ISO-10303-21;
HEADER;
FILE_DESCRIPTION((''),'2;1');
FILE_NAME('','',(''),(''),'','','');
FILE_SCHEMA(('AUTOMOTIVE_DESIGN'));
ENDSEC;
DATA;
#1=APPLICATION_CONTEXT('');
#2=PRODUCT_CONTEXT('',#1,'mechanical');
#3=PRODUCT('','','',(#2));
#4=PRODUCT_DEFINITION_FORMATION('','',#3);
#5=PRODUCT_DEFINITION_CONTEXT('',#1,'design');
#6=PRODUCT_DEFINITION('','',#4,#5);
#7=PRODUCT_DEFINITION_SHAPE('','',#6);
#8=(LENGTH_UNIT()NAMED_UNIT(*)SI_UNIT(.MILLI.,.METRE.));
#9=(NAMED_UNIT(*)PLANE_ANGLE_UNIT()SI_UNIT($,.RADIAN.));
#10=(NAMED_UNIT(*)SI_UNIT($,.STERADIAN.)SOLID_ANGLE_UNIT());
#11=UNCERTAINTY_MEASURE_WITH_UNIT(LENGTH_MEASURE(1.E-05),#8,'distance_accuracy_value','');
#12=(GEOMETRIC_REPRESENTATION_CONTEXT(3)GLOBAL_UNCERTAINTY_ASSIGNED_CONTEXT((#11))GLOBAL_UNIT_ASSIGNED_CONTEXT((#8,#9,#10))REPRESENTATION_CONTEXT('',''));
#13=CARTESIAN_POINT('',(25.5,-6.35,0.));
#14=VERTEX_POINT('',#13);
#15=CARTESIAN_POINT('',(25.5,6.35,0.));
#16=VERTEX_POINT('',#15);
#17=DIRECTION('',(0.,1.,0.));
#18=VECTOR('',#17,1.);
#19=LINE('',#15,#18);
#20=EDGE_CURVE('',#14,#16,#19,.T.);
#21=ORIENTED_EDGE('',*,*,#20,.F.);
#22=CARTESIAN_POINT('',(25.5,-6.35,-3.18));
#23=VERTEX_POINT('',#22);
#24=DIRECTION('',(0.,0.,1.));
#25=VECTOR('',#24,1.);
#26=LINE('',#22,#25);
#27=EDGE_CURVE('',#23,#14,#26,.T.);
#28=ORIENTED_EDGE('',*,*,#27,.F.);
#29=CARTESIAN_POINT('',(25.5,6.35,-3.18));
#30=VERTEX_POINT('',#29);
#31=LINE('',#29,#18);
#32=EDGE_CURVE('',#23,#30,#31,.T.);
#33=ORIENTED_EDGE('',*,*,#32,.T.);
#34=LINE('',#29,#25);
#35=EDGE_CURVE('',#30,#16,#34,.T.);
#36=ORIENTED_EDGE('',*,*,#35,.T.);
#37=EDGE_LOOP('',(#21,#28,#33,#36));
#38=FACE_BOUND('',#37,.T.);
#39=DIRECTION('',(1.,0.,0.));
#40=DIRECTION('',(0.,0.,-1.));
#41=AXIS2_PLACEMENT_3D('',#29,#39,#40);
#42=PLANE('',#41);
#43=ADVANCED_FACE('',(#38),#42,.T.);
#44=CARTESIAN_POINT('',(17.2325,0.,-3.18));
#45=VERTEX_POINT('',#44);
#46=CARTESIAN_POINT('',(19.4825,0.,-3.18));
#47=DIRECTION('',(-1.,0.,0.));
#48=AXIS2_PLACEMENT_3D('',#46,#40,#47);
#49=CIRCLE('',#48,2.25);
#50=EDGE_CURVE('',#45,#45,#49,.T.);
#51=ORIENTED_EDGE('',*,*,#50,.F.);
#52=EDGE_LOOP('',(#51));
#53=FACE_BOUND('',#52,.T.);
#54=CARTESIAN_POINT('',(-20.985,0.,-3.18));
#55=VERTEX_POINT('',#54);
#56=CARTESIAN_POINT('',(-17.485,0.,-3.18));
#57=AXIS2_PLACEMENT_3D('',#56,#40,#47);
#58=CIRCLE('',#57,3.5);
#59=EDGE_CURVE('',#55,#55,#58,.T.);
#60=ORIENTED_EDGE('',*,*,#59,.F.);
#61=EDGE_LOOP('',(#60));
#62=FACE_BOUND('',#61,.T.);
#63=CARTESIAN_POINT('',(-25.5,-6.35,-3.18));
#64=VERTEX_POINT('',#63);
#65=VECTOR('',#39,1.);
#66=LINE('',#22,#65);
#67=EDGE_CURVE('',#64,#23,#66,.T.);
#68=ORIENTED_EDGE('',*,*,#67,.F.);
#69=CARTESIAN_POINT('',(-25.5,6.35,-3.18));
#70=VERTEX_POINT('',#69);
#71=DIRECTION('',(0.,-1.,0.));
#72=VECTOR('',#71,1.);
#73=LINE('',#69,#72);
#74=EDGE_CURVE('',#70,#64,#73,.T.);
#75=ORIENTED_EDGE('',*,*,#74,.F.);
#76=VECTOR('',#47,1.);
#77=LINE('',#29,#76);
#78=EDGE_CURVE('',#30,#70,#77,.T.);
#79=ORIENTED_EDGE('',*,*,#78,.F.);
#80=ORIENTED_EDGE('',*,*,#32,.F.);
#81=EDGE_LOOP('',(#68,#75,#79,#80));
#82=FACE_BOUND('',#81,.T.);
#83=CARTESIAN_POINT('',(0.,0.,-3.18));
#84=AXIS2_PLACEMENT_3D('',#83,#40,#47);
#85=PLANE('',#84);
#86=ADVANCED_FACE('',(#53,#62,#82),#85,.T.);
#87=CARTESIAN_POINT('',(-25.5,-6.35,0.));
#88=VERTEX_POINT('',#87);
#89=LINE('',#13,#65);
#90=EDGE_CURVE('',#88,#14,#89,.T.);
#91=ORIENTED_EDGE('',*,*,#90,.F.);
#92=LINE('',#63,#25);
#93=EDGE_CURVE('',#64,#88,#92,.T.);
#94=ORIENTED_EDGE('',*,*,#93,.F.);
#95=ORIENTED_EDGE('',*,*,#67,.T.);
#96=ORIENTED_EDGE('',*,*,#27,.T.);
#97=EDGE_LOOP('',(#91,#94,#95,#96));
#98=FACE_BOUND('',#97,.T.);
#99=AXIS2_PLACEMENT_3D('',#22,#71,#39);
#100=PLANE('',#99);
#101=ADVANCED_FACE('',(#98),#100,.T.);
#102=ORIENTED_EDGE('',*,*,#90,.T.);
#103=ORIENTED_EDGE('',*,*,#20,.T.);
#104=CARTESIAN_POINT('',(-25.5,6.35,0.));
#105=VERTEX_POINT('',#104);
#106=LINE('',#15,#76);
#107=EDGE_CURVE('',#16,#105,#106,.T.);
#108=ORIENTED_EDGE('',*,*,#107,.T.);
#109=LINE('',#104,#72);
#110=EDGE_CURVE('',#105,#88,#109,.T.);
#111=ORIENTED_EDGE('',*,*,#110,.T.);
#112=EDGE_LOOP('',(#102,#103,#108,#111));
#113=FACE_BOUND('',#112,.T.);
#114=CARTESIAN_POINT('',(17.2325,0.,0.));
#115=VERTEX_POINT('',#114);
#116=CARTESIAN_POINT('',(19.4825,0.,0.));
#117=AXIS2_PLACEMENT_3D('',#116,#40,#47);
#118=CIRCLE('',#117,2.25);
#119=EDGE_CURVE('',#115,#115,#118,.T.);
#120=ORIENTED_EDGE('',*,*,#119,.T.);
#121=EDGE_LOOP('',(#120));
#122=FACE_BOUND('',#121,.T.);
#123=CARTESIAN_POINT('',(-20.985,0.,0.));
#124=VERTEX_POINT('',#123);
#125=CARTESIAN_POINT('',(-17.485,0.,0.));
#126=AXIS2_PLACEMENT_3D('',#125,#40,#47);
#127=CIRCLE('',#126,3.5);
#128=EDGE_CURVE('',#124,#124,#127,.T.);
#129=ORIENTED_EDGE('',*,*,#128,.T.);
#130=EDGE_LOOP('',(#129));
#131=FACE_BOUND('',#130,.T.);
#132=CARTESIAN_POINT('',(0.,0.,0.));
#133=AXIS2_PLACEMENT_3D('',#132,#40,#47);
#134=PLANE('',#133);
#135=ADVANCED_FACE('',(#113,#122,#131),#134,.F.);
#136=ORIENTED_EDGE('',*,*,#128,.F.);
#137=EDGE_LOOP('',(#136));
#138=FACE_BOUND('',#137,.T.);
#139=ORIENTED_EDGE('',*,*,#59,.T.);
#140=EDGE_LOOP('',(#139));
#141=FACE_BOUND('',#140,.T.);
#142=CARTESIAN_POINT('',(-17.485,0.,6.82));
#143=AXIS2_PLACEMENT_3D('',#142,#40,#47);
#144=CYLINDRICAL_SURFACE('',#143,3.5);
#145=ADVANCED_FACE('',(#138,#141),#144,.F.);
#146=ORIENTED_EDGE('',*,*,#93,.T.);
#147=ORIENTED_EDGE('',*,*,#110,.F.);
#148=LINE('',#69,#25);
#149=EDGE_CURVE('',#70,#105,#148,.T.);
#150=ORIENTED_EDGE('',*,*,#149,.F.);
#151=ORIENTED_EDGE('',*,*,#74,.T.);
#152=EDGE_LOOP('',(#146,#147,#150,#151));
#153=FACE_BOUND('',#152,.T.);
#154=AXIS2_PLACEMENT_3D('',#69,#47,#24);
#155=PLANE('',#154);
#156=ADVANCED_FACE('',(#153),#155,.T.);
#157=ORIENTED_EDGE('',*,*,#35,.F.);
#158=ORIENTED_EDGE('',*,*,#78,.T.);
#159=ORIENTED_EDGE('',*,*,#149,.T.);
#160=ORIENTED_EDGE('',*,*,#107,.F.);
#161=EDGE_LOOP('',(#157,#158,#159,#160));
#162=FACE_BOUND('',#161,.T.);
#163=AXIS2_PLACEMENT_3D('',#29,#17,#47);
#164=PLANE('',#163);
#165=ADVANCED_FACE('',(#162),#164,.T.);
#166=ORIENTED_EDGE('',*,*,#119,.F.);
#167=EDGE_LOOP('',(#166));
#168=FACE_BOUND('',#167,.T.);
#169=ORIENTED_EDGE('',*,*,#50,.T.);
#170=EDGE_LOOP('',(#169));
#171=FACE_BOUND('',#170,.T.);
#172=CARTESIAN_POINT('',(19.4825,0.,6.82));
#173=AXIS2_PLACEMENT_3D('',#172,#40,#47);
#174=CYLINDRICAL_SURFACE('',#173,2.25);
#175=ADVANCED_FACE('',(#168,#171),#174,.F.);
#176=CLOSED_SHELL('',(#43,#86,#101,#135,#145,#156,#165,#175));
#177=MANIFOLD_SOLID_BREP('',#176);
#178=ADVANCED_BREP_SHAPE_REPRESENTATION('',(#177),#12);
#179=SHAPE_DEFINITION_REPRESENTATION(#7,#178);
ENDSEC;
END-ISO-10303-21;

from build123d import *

# Parameters (mm, degrees)
ESBO_O1_W             = 51
ESBO_O1_H             = 12.7
FLANGE_BASE1_DEPTH    = 3.18
ESBO_O2_R             = 3.5
ESBO_O2_R_2           = 2.25
CORTE_EXTRUS_O1_DEPTH = 10


# Sheet-metal steps are written as plain solids
with BuildPart() as part:
    # Esboço1 → Flange-base1 (new body)
    with BuildSketch(Plane.XY):
        Rectangle(ESBO_O1_W, ESBO_O1_H)
    extrude(amount=-FLANGE_BASE1_DEPTH)

    # Esboço2 → Corte-extrusão1 (cut)
    with BuildSketch(Plane(origin=(0, 0, -3.18), x_dir=(-1, 0, 0), z_dir=(0, 0, -1))):
        with Locations((17.485, 0)):
            Circle(ESBO_O2_R)
        with Locations((-19.4825, 0)):
            Circle(ESBO_O2_R_2)
    extrude(amount=-CORTE_EXTRUS_O1_DEPTH, mode=Mode.SUBTRACT)


solid = part.part
